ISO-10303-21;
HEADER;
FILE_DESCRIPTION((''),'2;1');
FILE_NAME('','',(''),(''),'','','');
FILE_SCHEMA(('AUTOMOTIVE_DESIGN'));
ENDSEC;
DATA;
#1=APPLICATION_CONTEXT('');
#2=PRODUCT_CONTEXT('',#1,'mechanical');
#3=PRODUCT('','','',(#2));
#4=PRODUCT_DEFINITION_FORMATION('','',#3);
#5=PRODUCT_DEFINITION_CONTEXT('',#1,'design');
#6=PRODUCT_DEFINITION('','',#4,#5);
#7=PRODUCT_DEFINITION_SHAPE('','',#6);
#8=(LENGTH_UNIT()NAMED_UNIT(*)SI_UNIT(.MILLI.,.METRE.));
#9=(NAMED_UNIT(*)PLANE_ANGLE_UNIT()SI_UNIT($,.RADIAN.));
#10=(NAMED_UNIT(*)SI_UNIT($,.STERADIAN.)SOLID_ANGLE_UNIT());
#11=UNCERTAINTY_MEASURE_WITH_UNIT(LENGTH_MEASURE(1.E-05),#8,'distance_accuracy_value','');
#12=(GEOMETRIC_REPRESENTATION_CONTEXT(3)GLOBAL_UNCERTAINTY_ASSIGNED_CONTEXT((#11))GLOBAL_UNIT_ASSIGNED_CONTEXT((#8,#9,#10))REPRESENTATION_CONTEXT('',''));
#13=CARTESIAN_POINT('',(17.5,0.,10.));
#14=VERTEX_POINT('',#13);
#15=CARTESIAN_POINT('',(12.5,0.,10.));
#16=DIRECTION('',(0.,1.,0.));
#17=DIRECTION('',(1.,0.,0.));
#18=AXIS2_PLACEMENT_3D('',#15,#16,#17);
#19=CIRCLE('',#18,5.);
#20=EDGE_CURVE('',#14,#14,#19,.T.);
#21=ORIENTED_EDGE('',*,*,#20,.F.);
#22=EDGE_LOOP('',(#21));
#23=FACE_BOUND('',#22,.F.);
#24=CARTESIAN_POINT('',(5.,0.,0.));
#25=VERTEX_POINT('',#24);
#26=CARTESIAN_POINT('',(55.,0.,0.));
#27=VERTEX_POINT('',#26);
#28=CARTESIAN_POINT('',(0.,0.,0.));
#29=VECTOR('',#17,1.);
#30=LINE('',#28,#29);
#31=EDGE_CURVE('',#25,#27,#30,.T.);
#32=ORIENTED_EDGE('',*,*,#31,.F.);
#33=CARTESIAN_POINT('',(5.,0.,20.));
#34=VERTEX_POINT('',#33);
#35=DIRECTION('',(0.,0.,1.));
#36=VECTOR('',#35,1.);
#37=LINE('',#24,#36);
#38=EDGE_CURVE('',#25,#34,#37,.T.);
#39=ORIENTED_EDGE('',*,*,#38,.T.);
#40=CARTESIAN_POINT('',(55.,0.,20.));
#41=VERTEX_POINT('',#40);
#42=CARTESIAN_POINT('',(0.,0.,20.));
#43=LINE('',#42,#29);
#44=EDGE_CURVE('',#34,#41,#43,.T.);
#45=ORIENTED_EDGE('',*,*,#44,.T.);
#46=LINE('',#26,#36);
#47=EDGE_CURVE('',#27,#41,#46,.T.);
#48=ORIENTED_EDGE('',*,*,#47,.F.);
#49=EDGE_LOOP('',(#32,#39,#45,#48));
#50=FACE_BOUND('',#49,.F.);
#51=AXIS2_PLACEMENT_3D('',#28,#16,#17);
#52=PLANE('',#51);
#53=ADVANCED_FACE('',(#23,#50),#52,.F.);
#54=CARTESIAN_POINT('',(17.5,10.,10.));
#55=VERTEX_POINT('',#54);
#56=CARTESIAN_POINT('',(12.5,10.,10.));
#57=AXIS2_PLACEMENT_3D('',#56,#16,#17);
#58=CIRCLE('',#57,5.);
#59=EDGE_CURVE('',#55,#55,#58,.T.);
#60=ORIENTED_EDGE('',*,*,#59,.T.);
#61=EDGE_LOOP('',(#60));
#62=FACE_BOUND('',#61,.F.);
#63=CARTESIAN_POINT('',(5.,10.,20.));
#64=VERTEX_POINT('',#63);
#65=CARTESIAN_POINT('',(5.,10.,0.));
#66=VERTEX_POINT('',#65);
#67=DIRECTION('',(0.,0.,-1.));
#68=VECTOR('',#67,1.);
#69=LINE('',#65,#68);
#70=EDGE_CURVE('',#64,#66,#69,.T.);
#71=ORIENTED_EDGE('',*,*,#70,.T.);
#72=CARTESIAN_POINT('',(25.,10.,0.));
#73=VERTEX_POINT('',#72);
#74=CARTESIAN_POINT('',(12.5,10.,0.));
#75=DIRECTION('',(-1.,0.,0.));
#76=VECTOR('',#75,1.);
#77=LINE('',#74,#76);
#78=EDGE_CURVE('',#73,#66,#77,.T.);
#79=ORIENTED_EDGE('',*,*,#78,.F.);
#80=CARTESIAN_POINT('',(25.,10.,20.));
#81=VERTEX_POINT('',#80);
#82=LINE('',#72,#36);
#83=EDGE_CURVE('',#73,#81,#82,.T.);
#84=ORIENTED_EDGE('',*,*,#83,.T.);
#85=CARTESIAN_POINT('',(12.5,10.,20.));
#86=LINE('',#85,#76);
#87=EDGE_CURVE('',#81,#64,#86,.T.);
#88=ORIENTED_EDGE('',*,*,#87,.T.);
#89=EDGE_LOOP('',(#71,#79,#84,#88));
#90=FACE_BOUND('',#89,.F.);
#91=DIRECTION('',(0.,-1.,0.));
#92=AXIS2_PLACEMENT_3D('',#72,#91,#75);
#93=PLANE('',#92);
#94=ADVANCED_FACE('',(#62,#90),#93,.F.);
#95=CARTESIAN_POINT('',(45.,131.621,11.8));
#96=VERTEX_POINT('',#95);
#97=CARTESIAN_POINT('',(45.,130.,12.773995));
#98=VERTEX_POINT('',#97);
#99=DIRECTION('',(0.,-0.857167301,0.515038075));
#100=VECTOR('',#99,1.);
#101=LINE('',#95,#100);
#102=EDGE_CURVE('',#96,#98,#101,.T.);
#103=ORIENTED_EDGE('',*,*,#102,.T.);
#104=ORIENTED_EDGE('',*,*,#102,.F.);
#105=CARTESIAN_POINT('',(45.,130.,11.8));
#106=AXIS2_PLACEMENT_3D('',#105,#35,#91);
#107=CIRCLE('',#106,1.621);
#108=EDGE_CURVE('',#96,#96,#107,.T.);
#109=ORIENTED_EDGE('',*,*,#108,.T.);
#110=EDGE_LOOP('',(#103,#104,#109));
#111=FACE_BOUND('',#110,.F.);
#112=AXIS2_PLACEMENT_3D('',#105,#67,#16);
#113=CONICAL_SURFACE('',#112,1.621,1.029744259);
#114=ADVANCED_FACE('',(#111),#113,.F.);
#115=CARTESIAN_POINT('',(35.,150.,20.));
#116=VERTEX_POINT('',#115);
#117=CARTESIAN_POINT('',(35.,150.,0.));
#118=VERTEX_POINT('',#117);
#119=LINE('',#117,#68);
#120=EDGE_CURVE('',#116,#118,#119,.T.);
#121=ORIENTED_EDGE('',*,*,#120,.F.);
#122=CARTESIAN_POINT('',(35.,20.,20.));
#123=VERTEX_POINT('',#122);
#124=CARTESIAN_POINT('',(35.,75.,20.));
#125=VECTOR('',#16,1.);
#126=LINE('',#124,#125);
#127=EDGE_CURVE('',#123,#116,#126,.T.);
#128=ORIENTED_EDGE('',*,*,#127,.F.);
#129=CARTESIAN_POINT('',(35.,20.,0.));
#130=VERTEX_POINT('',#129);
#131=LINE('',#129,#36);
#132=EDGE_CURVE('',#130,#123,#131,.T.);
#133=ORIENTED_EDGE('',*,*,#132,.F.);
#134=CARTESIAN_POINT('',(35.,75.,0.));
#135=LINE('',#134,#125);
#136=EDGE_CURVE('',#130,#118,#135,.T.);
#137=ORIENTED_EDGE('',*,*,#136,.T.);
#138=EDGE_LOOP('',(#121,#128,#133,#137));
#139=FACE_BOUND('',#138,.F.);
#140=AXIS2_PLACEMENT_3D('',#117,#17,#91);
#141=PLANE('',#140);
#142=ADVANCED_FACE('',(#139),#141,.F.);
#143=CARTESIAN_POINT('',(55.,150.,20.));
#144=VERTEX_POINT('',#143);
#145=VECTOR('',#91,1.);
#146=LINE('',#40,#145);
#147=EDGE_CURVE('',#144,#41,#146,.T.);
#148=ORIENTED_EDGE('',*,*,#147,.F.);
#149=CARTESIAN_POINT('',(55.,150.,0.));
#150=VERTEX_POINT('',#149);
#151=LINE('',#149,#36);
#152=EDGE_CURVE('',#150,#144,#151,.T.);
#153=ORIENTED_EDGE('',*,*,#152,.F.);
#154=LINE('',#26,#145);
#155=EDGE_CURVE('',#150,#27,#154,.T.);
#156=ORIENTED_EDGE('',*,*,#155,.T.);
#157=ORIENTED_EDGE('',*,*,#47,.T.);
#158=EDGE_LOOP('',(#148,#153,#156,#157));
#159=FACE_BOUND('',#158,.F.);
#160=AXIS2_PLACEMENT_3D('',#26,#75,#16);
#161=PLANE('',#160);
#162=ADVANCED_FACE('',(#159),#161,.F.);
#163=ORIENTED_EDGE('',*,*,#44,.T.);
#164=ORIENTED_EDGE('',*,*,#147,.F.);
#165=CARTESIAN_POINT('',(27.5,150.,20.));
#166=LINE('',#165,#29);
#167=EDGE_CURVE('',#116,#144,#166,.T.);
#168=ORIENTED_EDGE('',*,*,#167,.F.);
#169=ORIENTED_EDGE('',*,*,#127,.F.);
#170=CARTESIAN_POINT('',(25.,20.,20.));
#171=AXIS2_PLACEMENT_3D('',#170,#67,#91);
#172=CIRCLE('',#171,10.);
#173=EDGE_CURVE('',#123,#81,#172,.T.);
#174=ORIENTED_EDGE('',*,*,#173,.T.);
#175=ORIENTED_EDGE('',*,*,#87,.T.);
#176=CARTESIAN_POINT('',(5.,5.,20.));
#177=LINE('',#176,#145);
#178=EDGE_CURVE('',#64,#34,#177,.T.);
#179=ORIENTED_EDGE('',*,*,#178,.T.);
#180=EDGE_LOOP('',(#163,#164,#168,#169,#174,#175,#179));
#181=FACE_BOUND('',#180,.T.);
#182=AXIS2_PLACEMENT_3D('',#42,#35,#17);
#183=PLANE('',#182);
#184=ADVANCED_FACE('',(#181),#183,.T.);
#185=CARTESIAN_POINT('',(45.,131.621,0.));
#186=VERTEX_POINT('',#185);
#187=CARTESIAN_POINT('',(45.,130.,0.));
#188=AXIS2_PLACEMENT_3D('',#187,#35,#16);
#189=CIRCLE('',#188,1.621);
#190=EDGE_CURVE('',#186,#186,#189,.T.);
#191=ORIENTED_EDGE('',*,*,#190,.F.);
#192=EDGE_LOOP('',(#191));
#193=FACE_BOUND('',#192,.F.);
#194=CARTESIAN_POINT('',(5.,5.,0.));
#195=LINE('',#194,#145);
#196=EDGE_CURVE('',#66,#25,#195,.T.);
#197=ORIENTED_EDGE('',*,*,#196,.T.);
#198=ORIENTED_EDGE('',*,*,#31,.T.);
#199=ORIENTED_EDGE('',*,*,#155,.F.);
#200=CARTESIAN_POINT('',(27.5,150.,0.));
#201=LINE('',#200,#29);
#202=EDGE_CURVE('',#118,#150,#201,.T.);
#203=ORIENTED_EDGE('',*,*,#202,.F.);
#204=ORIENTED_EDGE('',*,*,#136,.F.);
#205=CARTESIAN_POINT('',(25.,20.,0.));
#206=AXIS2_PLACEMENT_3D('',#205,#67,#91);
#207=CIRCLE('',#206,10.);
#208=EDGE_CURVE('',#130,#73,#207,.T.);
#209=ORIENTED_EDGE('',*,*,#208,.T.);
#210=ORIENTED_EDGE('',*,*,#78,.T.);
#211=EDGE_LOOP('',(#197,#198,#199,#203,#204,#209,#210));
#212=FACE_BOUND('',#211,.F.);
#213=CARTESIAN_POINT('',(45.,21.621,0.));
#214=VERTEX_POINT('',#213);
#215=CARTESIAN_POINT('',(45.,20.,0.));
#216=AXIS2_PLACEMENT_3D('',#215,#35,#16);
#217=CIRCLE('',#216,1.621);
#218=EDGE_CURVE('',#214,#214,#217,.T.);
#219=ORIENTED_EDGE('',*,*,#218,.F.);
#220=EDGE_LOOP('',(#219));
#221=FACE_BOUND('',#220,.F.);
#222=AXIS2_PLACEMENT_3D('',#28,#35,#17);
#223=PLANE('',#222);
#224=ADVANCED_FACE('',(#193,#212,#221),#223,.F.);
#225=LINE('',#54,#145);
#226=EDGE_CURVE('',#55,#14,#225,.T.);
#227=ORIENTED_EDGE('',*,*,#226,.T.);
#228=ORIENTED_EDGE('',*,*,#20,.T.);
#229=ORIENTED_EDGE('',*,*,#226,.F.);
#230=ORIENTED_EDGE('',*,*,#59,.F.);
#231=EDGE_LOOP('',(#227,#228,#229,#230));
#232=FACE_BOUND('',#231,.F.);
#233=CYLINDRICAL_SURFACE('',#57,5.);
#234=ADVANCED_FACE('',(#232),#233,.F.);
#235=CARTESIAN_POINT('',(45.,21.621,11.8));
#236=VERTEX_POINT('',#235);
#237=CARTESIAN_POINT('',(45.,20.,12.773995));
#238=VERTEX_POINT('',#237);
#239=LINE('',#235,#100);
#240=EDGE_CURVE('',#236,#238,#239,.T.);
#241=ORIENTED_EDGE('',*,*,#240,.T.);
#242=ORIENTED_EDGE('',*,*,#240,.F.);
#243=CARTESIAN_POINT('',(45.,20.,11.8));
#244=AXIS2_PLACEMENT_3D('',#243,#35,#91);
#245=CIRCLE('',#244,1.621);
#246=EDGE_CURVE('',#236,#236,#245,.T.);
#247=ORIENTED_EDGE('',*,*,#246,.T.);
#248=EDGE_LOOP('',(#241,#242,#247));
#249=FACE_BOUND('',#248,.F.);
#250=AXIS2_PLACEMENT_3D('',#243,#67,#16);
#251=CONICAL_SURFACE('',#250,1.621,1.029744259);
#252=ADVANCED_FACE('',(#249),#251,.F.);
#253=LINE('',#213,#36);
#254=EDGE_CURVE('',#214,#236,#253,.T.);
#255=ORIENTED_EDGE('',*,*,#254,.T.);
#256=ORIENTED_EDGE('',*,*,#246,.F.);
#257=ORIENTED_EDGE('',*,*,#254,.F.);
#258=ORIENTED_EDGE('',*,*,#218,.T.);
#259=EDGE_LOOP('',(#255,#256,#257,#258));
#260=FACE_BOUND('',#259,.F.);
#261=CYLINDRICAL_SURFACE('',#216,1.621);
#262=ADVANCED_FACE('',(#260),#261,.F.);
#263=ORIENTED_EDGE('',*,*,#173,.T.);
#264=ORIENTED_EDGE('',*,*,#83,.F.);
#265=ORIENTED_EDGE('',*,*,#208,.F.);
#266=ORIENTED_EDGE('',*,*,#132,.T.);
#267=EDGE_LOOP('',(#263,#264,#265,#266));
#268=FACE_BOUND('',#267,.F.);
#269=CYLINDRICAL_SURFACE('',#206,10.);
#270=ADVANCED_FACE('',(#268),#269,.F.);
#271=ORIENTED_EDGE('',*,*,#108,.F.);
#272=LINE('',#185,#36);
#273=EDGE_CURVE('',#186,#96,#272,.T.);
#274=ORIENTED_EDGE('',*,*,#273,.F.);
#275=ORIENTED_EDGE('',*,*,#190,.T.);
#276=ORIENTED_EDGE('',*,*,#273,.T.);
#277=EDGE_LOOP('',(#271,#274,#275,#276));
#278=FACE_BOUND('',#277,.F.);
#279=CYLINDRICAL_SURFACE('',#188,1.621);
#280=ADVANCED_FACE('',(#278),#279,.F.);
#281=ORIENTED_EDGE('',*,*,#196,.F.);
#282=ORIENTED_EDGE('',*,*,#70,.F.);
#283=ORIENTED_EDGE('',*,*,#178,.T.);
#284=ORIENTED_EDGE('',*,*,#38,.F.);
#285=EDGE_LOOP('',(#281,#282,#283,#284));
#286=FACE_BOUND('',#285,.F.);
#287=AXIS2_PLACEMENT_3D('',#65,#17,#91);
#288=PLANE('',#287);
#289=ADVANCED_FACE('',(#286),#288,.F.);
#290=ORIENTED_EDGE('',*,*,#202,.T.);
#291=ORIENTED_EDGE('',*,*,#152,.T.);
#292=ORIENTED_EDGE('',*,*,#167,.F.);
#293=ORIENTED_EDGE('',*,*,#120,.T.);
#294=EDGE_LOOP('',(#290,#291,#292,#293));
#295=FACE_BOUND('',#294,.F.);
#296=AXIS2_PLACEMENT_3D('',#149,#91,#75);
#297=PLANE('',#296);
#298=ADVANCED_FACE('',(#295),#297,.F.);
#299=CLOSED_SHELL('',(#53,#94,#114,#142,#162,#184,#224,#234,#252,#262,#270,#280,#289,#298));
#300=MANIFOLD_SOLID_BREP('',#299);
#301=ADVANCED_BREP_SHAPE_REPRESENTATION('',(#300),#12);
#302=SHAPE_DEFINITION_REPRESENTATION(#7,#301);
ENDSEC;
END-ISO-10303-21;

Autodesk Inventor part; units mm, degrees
ref_plane "YZ Plane" through (0, 0, 0) normal (1, 0, 0) x (0, 1, 0)
ref_plane "XZ Plane" through (0, 0, 0) normal (0, 1, 0) x (-1, 0, 0)
ref_plane "XY Plane" through (0, 0, 0) normal (0, 0, 1) x (1, 0, 0)
sketch "Bracket Tall" plane through (0, 0, 0) normal (0, 0, 1) x (1, 0, 0)
  line L0 (0, 0) -> (30, 0)
  line L1 (25, 10) -> (0, 10)
  line L2 (0, 10) -> (0, 0)
  line L3 (30, 0) -> (55, 0)
  line L4 (55, 0) -> (55, 150)
  line L5 (55, 150) -> (35, 150)
  line L6 (35, 150) -> (35, 20)
  arc A0 (25, 10) -> (35, 20) centre (25, 20) ccw
  point P0 (35, 10)
  dimension "d0" = 35
  dimension "d2" = 20
  dimension "d3" = 150
  dimension "d4" = 10
  dimension "d10" = 10
extrude "Extrusion1" add sketch "Bracket Tall" along normal blind 20
sketch "Clearance Hole (M6-8)" plane through (0, 10, 0) normal (0, 1, 0) x (1, 0, 0)
  circle A0 centre (12.5, -10) radius 5
  line L0 (0, 0) -> (0, -20) projected
  line L1 (25, 0) -> (25, -20) projected
  dimension "d7" = 10
extrude "Extrusion2" cut sketch "Clearance Hole (M6-8)" against normal through all
sketch "Sketch3" plane through (0, 0, 0) normal (0, 0, -1) x (-1, 0, 0)
  line L0 (-55, 0) -> (-55, 150) projected
  line L1 (-55, 20) -> (-55, 0)
  circle A0 centre (-45, 20) radius 3
  line L2 (-45, 20) -> (-45, 130)
  point P0 (0, 0)
  dimension "d14" = 6
  dimension "d27" = 110
hole "Hole1" at (45, 20, 0) at (45, 130, 0) direction (0, 0, 1) diameter 3.242 depth 11.8 tip angle 118 thread size "M4x0.7" class "6H" standard "ANSI Metric M Profile"
move faces "Move1" translate (5, 0, 0) faces at (0, 6.6667, 6.6667)
properties part number "Bracket_Tall" material "Aluminum, Anodized Silver"
